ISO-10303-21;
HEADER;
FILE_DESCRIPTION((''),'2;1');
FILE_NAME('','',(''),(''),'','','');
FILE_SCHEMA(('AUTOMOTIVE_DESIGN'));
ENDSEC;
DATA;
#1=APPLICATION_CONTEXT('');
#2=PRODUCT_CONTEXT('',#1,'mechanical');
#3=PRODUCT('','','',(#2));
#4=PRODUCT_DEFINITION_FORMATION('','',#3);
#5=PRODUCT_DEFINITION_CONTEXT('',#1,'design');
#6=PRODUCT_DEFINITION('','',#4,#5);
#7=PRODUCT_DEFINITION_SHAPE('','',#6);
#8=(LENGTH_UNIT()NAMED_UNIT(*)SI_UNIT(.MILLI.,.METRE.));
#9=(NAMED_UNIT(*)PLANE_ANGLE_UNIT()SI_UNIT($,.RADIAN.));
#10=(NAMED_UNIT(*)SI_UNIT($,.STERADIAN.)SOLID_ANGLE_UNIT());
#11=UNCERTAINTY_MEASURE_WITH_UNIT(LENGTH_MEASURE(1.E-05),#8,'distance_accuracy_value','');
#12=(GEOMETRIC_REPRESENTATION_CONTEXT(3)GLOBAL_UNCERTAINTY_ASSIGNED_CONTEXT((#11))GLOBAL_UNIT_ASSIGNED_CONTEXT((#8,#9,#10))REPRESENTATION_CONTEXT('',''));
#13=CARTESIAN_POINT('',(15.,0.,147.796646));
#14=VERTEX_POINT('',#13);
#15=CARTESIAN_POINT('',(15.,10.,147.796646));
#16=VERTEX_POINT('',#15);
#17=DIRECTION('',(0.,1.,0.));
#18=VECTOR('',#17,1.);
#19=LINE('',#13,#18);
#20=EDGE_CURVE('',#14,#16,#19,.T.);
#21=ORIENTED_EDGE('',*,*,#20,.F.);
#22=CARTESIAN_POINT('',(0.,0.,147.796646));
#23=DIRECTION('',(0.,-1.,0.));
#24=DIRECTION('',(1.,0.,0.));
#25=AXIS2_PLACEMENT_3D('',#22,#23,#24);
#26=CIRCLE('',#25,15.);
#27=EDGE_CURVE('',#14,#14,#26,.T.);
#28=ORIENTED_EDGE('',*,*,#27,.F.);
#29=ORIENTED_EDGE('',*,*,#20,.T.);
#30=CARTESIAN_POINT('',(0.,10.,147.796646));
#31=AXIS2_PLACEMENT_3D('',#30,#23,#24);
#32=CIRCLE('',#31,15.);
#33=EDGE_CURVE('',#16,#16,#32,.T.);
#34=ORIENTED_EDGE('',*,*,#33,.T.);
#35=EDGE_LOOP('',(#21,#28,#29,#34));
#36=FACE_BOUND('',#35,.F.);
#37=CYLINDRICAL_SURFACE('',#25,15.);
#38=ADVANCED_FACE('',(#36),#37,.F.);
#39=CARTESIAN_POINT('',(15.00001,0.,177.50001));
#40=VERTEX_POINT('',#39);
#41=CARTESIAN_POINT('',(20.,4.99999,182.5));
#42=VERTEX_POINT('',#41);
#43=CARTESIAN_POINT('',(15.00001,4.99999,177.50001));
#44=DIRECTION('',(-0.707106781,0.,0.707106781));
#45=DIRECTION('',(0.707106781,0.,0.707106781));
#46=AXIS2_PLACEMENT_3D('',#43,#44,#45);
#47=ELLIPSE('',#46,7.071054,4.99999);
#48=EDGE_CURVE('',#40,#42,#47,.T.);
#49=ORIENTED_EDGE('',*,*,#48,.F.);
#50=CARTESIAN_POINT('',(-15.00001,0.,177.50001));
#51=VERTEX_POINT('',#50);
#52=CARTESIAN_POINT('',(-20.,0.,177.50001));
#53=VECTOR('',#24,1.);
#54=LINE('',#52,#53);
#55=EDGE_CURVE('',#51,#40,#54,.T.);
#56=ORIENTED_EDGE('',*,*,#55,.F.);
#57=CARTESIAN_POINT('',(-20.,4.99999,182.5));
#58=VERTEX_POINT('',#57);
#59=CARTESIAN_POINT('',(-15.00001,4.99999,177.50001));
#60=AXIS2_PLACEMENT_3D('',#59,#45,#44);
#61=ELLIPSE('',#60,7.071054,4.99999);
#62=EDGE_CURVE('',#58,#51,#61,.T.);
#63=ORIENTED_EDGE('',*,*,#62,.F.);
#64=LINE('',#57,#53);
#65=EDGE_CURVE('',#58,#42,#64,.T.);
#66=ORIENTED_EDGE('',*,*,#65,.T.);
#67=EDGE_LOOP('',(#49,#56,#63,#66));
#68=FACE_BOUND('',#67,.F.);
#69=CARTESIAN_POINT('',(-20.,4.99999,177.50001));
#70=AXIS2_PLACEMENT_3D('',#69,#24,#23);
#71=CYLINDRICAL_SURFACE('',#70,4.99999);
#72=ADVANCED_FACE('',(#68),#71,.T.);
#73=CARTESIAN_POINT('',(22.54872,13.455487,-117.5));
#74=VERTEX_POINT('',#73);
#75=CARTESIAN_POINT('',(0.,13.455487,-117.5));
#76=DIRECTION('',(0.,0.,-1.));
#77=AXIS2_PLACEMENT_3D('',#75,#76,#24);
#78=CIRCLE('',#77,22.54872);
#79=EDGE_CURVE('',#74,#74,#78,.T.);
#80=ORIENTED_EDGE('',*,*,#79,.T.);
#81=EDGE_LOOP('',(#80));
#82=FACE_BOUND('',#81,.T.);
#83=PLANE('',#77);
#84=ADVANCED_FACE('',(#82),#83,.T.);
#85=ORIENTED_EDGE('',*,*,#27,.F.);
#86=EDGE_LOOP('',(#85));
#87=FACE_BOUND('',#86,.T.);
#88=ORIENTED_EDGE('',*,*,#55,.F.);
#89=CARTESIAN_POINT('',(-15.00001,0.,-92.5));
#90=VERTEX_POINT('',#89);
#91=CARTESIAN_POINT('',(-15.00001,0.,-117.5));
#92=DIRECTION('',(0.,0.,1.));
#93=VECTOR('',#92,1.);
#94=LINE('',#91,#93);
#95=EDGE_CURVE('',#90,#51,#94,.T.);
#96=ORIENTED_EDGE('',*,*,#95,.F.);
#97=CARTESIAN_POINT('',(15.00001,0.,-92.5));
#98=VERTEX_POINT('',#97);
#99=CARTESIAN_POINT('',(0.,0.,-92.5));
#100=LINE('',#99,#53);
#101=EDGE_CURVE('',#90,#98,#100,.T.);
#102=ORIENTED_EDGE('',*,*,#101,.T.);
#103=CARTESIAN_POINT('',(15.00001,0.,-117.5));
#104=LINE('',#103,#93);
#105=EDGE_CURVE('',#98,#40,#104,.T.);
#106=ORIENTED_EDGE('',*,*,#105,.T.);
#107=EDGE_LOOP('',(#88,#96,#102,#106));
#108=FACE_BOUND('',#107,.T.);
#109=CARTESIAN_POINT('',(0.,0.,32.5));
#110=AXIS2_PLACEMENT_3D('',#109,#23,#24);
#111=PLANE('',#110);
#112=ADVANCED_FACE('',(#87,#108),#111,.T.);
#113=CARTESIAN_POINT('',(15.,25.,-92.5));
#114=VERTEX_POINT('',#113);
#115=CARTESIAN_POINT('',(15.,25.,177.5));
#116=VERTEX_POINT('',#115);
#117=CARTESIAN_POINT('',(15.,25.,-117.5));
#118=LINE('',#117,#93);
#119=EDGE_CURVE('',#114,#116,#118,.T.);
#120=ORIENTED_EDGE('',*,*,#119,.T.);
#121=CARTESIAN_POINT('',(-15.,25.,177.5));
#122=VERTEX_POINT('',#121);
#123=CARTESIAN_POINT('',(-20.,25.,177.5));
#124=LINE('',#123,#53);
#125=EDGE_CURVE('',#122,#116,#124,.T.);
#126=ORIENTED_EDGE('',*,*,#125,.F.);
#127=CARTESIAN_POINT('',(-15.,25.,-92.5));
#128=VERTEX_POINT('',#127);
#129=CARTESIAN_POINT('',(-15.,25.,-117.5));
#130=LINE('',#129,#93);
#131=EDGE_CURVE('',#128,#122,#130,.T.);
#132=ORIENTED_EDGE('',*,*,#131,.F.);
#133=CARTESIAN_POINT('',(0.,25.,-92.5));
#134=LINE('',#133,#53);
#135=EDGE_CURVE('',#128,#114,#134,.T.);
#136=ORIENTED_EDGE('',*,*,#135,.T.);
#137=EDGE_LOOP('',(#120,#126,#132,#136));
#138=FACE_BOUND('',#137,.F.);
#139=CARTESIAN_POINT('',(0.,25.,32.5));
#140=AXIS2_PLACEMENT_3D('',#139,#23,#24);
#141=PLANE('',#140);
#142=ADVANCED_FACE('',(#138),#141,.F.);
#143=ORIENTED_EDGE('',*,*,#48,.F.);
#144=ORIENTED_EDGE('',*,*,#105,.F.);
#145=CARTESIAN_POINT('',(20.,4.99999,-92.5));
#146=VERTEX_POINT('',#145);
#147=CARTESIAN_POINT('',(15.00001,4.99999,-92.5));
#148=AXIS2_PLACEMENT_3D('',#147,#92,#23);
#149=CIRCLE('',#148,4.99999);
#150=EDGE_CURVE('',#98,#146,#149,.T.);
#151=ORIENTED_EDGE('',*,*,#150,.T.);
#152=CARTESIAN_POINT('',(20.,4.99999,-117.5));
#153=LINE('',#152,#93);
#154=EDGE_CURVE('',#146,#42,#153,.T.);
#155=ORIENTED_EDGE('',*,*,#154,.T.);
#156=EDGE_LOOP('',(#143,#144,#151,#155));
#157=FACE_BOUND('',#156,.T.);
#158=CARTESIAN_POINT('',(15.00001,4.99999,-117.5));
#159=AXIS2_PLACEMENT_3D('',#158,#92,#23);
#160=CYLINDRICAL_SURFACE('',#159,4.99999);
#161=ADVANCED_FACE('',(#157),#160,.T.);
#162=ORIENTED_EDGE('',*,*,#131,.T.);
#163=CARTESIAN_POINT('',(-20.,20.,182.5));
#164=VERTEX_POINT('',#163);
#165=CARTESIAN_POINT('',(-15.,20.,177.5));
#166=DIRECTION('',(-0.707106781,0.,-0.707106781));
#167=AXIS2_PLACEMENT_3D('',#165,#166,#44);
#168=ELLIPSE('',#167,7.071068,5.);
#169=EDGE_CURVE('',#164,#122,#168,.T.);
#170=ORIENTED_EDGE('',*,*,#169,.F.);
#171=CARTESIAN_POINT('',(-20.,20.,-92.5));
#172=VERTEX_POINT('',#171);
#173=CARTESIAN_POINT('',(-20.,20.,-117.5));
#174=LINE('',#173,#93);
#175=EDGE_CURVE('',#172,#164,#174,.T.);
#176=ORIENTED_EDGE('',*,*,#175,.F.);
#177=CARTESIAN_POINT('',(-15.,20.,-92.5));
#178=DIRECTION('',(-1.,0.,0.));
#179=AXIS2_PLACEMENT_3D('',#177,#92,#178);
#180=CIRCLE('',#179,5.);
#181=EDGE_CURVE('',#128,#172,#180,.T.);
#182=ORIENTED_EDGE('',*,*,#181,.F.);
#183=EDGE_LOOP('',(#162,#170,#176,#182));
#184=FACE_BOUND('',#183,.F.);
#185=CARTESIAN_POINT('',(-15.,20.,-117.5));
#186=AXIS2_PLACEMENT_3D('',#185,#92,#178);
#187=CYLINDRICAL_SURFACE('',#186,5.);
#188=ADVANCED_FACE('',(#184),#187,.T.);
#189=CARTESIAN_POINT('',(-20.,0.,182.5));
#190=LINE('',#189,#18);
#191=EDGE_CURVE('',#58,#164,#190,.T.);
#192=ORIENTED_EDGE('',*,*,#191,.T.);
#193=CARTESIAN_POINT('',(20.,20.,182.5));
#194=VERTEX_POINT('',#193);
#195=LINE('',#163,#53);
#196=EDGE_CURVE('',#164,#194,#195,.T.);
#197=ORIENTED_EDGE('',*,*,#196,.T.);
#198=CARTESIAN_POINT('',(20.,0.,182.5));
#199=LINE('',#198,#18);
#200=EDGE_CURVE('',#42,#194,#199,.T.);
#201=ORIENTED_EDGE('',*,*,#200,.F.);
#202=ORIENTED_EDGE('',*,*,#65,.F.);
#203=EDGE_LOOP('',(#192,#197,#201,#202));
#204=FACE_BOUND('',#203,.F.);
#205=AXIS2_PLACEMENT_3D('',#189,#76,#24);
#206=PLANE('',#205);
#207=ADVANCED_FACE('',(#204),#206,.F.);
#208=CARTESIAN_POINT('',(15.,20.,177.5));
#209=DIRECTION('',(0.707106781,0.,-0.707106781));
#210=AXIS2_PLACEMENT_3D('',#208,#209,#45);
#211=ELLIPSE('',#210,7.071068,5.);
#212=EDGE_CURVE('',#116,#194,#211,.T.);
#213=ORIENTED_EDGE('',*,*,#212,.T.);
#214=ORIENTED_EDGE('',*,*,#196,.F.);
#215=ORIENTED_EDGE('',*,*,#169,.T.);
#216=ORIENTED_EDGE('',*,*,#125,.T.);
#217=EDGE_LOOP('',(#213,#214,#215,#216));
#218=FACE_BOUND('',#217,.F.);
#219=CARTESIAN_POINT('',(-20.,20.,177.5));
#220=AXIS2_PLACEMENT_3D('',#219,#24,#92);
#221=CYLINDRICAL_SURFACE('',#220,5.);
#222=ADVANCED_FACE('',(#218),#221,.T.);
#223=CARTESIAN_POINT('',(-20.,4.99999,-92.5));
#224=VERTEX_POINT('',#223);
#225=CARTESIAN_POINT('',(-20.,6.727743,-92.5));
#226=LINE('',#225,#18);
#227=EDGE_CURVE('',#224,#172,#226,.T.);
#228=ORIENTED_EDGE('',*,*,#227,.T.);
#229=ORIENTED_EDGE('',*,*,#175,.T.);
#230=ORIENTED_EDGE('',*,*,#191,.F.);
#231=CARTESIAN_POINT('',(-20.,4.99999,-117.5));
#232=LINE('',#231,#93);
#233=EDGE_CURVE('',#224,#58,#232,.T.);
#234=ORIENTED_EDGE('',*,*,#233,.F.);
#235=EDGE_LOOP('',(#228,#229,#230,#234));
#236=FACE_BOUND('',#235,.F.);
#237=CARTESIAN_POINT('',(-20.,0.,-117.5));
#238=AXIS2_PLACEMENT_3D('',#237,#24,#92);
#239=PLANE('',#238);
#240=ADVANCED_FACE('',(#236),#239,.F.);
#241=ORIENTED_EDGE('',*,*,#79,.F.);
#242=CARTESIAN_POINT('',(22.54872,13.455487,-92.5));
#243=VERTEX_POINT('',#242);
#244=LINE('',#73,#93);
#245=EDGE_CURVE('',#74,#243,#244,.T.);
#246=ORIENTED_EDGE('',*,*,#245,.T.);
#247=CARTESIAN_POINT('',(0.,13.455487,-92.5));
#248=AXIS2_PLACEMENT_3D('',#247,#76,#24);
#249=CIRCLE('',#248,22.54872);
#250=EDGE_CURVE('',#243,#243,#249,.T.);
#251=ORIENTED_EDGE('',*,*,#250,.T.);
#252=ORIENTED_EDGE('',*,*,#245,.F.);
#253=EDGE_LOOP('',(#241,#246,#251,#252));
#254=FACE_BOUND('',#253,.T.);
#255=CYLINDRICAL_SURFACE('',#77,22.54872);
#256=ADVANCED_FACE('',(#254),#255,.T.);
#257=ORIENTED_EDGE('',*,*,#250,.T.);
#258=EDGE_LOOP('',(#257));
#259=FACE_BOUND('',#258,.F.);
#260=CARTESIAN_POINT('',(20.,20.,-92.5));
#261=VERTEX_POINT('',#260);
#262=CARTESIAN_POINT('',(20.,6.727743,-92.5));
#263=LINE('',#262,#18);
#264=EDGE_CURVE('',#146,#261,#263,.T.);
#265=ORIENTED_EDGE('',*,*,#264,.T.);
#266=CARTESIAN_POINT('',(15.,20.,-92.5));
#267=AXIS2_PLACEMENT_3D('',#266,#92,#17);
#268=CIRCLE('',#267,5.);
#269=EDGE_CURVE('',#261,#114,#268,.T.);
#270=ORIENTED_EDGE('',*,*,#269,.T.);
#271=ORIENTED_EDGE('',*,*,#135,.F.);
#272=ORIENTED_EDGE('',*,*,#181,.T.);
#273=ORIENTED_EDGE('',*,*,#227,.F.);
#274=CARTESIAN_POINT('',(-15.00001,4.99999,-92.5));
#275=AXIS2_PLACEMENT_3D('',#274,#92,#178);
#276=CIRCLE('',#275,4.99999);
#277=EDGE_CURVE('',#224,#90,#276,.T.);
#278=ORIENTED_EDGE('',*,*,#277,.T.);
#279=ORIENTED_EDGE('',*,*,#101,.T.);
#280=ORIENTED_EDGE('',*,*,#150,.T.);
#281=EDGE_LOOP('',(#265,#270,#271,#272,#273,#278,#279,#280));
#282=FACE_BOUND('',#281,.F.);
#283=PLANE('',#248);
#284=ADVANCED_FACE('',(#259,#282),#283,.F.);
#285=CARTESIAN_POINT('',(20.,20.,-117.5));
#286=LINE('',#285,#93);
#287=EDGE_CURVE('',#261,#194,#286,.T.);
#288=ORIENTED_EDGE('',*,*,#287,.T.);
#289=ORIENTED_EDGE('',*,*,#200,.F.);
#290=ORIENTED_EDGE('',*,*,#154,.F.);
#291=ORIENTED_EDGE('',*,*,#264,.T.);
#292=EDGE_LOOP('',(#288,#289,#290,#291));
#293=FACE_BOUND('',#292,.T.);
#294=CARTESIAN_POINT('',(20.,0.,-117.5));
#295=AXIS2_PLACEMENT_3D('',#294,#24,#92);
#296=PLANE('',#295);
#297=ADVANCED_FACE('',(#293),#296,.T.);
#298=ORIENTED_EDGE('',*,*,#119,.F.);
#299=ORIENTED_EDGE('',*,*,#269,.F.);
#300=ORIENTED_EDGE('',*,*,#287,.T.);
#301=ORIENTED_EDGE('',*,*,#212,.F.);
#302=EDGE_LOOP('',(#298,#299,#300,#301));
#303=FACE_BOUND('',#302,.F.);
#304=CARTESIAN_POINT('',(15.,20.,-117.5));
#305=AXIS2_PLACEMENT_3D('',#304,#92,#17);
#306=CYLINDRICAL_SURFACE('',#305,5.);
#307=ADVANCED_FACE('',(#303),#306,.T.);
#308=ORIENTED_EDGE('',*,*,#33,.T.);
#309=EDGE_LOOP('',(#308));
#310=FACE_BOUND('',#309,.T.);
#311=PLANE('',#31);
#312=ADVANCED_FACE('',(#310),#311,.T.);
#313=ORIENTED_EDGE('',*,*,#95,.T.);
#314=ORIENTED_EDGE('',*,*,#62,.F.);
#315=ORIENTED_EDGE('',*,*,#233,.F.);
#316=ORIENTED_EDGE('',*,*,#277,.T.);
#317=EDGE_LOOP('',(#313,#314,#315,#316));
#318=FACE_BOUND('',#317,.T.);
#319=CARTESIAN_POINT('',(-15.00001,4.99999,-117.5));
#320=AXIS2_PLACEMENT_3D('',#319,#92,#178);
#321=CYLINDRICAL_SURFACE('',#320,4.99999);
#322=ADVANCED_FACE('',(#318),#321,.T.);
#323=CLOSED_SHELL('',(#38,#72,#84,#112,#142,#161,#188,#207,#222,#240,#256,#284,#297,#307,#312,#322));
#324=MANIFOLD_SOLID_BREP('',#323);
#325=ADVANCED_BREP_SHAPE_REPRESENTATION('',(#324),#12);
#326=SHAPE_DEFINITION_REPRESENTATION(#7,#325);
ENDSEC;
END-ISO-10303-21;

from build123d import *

# Parameters (mm, degrees)
F0_W     = 40
F0_H     = 300
F1_DEPTH = 25
F2_R     = 15
F3_DEPTH = 10
F4_R     = 5
F5_R     = 4.99999
F6_R     = 22.5487204306
F7_DEPTH = 25


# Not quite as in the source:
# - a fillet or chamfer is up to 0.001 mm smaller than in the source, because OpenCascade refuses the exact size


with BuildPart() as f1:
    # F0 (on Front) → F1 (new body)
    with BuildSketch(Plane.XZ):
        with Locations((0, 32.5)):
            Rectangle(F0_W, F0_H)
    extrude(amount=-F1_DEPTH)

    # F2 (on Front) → F3 (cut)
    with BuildSketch(Plane.XZ):
        with Locations((0, 147.7966460525)):
            Circle(F2_R)
    extrude(amount=-F3_DEPTH, mode=Mode.SUBTRACT)

    # F4
    f4_edges = [f1.edges().sort_by_distance(p)[0] for p in [
        (20, 25, 32.5),
        (-20, 25, 32.5),
        (0, 25, 182.5),
    ]]
    fillet(f4_edges, radius=F4_R)

    # F5 (radius 5 in the source; OpenCascade refuses exactly that, so slightly less here)
    f5_edges = [f1.edges().sort_by_distance(p)[0] for p in [
        (20, 0, 32.5),
        (-20, 0, 32.5),
        (0, 0, 182.5),
    ]]
    fillet(f5_edges, radius=F5_R)

    # F6 (on face) → F7 (join)
    with BuildSketch(Plane(origin=(0, 0, -117.5), x_dir=(1, 0, 0), z_dir=(0, 0, -1))):
        with Locations((0, -13.4554868564)):
            Circle(F6_R)
    extrude(amount=-F7_DEPTH)


solid = f1.part
